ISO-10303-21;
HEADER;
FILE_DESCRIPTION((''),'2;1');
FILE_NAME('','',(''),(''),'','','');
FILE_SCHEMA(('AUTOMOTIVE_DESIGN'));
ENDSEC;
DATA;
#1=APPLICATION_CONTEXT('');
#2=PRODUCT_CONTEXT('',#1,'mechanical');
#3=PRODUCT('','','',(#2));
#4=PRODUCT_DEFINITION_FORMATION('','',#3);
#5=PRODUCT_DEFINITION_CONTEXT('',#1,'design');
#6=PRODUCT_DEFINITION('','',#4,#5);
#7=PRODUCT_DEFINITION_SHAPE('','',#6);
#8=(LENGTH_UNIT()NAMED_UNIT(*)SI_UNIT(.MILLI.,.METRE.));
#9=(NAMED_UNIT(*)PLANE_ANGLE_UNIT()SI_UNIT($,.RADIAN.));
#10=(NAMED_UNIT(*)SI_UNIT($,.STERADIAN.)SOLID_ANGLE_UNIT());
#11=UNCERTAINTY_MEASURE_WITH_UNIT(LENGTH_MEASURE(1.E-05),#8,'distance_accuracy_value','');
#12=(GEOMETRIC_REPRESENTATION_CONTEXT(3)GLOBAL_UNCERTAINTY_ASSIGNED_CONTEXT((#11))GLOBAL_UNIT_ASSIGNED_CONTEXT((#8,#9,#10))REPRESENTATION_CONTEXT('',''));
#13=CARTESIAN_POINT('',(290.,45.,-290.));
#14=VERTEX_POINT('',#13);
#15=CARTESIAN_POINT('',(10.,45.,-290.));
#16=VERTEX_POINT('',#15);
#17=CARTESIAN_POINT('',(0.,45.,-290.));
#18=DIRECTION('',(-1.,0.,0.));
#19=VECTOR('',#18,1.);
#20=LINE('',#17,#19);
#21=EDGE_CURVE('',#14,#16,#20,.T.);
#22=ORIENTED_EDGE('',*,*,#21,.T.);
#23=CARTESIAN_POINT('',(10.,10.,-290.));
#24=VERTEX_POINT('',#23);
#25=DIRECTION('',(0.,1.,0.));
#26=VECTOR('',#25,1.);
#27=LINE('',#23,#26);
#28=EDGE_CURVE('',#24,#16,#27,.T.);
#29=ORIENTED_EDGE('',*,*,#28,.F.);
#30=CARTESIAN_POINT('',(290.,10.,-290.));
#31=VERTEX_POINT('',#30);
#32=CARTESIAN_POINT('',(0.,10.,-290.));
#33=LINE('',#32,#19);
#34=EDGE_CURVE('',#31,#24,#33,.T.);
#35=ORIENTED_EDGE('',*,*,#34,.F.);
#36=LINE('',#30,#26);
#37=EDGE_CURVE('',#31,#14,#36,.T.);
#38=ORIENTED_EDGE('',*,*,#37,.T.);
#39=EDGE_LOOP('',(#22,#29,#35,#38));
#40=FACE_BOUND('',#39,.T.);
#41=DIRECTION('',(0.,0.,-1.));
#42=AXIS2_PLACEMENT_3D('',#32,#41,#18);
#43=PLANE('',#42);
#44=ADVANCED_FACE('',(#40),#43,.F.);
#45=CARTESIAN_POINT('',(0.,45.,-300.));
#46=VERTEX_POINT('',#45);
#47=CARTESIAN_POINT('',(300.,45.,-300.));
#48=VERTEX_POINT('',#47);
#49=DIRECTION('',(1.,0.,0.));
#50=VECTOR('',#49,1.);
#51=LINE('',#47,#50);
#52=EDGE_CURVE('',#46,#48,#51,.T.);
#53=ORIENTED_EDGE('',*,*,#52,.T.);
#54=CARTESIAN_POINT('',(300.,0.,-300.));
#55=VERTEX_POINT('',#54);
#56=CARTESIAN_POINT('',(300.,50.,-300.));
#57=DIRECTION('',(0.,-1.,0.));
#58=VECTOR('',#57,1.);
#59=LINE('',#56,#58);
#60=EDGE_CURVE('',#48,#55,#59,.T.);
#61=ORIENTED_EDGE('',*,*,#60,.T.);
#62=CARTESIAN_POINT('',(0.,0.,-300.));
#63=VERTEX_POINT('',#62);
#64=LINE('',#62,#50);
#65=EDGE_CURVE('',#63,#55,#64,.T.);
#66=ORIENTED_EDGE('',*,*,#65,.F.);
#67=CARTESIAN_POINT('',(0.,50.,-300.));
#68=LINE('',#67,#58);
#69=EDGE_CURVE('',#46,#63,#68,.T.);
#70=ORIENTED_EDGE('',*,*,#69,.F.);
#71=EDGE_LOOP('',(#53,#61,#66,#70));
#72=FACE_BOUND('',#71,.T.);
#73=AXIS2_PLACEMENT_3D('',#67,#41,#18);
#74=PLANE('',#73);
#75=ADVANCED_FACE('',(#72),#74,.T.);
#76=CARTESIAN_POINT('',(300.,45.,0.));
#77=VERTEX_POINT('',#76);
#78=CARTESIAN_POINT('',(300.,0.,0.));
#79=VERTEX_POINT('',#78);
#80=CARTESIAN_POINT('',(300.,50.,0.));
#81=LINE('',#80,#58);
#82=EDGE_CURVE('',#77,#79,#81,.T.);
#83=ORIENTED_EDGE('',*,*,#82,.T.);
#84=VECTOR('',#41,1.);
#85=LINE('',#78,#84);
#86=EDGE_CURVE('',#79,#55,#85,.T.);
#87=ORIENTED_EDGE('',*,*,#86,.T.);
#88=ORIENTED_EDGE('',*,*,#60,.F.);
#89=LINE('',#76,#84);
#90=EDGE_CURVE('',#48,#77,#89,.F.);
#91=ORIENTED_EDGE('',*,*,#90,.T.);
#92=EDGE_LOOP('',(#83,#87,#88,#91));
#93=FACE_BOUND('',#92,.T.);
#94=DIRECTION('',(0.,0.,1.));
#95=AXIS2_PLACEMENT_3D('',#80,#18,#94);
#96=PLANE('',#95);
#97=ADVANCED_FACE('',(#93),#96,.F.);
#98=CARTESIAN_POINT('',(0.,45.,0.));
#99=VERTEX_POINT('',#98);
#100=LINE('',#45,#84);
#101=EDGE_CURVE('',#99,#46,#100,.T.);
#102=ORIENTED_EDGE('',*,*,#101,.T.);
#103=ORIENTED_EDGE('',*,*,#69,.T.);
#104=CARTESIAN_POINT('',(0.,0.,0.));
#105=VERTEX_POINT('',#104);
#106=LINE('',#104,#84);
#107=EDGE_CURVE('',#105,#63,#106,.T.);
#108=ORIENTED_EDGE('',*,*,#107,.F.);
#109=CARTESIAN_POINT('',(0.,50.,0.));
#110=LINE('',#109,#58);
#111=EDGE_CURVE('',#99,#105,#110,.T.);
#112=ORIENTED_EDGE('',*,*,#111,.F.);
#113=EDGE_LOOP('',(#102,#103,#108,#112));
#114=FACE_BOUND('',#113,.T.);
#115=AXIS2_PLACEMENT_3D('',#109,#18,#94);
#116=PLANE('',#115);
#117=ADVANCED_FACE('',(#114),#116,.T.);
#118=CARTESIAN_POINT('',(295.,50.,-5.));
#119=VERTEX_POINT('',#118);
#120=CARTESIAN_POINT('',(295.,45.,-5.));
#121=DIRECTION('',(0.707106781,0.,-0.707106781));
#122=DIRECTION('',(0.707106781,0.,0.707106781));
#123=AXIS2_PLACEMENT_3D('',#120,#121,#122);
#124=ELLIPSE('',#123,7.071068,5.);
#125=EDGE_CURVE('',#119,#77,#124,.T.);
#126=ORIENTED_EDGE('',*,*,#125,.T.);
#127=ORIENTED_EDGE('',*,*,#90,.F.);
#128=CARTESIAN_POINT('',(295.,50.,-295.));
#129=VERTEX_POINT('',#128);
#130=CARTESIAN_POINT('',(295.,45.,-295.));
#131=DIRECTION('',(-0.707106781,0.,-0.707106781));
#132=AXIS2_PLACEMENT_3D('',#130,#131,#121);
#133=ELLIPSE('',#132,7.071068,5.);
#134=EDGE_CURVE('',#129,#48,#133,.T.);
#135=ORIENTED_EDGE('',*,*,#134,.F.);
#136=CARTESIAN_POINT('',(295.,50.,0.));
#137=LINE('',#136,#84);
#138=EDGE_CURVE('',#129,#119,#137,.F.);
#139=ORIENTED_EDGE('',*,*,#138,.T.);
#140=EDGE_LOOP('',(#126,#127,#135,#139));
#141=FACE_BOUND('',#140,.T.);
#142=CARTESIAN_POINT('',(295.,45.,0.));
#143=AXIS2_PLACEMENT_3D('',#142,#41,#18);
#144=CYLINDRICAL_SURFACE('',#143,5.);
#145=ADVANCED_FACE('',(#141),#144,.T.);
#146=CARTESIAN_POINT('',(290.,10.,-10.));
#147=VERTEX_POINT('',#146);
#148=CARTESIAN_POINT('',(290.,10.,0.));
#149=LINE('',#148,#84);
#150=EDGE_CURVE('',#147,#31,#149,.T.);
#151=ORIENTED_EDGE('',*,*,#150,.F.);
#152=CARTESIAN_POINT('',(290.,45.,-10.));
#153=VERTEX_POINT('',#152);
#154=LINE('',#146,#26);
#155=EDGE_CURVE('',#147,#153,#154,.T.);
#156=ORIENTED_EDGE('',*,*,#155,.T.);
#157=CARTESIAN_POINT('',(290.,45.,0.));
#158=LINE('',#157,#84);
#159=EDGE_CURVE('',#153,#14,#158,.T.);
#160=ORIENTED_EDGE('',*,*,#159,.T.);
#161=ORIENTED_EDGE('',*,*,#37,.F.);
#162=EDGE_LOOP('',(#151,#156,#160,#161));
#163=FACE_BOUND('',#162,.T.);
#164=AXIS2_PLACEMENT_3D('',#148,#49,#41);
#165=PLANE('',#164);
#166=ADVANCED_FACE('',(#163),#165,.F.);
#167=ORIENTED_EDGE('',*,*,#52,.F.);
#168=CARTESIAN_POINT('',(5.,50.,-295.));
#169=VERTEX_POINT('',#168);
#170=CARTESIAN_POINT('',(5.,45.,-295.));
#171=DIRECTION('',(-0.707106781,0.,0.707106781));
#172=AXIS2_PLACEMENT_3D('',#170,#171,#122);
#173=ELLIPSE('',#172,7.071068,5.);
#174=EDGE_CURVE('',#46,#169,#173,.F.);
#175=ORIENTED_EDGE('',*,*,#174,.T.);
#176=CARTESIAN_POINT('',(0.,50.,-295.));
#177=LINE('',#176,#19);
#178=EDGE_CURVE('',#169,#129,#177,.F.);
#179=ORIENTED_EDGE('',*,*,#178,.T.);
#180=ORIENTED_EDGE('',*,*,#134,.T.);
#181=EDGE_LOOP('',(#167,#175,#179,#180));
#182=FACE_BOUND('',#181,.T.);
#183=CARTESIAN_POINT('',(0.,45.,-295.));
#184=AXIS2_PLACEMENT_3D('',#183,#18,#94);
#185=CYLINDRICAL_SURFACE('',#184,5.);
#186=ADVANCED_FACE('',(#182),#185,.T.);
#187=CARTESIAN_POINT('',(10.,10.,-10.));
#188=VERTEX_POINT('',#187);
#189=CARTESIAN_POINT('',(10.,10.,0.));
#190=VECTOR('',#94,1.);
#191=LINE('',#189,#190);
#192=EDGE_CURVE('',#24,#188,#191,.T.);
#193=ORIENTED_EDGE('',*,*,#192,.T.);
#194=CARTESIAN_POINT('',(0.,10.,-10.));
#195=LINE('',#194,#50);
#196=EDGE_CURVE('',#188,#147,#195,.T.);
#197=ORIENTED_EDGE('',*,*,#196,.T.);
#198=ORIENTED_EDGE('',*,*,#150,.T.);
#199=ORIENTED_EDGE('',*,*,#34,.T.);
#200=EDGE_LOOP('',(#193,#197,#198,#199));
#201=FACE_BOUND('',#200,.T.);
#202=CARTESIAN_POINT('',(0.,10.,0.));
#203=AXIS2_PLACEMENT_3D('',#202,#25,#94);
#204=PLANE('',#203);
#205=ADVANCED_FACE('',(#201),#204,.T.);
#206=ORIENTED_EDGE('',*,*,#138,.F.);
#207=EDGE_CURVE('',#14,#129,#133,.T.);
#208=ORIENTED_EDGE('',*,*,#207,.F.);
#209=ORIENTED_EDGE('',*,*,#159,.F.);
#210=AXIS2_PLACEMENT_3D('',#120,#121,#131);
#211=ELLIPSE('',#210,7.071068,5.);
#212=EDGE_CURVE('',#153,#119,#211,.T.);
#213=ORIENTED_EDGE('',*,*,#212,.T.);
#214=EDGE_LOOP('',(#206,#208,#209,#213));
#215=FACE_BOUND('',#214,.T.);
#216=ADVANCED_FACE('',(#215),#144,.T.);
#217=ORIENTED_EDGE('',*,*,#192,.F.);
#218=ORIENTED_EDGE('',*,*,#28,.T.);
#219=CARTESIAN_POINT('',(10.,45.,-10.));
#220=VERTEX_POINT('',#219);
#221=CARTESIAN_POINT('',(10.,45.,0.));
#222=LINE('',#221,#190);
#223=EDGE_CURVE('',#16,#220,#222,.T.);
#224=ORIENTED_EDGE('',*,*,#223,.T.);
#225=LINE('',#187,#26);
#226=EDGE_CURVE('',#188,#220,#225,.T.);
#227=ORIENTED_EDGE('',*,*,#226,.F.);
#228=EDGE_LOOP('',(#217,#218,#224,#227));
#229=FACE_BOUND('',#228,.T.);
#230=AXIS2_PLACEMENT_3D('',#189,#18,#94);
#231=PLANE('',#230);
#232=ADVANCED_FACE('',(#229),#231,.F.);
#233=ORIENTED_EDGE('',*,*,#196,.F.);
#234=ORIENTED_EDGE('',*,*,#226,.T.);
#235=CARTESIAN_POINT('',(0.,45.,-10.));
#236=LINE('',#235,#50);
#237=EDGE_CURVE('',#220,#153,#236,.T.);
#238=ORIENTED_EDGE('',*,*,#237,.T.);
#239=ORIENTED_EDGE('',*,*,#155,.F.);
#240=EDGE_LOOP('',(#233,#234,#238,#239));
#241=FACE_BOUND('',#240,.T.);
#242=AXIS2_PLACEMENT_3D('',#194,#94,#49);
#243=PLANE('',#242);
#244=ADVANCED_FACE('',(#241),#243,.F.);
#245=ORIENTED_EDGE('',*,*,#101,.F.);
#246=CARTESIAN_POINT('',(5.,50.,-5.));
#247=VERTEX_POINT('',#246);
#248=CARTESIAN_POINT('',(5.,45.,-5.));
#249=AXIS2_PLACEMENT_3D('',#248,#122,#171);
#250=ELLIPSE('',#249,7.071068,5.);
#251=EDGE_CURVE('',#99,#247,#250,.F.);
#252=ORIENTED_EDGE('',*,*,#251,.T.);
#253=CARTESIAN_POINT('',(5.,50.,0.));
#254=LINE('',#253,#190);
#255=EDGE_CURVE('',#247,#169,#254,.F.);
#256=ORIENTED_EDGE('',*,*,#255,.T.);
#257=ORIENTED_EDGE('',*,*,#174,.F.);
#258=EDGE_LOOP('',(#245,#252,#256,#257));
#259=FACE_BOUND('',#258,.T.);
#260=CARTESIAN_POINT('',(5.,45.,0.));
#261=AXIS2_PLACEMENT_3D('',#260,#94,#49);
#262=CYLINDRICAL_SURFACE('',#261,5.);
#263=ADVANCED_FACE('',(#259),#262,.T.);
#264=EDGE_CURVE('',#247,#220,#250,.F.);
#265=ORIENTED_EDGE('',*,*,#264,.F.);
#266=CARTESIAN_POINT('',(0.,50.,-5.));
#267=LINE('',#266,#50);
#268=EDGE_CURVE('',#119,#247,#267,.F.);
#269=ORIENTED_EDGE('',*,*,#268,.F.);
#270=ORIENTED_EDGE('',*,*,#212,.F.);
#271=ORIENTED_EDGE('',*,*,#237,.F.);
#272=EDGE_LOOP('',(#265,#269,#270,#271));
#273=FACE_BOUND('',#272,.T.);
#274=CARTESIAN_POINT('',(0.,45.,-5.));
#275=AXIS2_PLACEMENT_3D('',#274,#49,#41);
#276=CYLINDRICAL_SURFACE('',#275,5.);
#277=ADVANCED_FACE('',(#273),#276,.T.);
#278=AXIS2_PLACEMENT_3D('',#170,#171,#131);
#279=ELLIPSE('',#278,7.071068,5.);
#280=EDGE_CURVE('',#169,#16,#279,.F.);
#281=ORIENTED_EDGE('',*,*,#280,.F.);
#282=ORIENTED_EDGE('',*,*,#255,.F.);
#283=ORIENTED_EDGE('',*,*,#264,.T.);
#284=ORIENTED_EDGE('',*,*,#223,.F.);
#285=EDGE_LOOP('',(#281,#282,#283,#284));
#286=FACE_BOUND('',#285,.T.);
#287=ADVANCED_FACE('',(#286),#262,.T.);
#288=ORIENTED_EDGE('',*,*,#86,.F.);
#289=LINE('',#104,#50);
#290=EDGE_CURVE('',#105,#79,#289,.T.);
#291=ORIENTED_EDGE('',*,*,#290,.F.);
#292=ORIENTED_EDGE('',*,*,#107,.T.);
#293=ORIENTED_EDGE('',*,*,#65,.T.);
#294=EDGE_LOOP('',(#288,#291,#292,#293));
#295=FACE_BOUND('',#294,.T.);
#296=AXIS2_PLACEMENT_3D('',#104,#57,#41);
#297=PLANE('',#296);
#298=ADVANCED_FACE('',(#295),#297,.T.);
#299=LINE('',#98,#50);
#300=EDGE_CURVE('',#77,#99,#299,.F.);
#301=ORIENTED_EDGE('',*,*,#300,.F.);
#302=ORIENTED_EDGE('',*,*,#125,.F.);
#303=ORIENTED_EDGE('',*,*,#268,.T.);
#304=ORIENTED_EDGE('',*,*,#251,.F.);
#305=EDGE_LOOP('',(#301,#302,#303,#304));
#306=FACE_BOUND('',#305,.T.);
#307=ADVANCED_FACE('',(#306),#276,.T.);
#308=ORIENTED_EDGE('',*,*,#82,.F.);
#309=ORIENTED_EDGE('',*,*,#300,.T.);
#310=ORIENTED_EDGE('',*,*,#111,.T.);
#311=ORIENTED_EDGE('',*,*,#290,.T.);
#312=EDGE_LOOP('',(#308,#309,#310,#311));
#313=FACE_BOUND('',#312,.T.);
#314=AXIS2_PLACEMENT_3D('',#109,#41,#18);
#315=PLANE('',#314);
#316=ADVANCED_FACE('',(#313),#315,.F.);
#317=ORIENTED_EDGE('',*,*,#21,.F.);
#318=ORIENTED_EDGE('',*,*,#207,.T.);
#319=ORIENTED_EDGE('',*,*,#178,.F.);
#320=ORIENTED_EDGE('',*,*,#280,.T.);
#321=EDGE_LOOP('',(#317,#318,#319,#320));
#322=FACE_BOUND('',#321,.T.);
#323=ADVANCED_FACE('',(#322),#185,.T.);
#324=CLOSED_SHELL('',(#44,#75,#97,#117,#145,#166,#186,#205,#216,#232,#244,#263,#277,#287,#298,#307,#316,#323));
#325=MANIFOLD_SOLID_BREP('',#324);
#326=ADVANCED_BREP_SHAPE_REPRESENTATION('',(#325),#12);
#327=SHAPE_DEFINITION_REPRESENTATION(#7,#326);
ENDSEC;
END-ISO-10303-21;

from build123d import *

# Parameters (mm, degrees)
SKETCH1_W           = 300
SKETCH1_H           = 300
BOSS_EXTRUDE1_DEPTH = 50
SKETCH2_W           = 280
SKETCH2_H           = 280
CUT_EXTRUDE1_DEPTH  = 40
FILLET1_R           = 5


with BuildPart() as part:
    # Sketch1 → Boss-Extrude1 (new body)
    with BuildSketch(Plane(origin=(0, 0, 0), x_dir=(1, 0, 0), z_dir=(0, 1, 0))):
        with Locations((150, 150)):
            Rectangle(SKETCH1_W, SKETCH1_H)
    extrude(amount=BOSS_EXTRUDE1_DEPTH)

    # Sketch2 → Cut-Extrude1 (cut)
    with BuildSketch(Plane(origin=(0, 50, 0), x_dir=(1, 0, 0), z_dir=(0, 1, 0))):
        with Locations((150, 150)):
            Rectangle(SKETCH2_W, SKETCH2_H)
    extrude(amount=-CUT_EXTRUDE1_DEPTH, mode=Mode.SUBTRACT)

    # Fillet1
    fillet1_edges = [part.edges().sort_by_distance(p)[0] for p in [
        (300, 50, -150),
        (150, 50, 0),
        (290, 50, -150),
        (150, 50, -290),
        (10, 50, -150),
        (150, 50, -10),
        (0, 50, -150),
        (150, 50, -300),
    ]]
    fillet(fillet1_edges, radius=FILLET1_R - 0.0001)  # a hair under: the kernel refuses the full size


solid = part.part
